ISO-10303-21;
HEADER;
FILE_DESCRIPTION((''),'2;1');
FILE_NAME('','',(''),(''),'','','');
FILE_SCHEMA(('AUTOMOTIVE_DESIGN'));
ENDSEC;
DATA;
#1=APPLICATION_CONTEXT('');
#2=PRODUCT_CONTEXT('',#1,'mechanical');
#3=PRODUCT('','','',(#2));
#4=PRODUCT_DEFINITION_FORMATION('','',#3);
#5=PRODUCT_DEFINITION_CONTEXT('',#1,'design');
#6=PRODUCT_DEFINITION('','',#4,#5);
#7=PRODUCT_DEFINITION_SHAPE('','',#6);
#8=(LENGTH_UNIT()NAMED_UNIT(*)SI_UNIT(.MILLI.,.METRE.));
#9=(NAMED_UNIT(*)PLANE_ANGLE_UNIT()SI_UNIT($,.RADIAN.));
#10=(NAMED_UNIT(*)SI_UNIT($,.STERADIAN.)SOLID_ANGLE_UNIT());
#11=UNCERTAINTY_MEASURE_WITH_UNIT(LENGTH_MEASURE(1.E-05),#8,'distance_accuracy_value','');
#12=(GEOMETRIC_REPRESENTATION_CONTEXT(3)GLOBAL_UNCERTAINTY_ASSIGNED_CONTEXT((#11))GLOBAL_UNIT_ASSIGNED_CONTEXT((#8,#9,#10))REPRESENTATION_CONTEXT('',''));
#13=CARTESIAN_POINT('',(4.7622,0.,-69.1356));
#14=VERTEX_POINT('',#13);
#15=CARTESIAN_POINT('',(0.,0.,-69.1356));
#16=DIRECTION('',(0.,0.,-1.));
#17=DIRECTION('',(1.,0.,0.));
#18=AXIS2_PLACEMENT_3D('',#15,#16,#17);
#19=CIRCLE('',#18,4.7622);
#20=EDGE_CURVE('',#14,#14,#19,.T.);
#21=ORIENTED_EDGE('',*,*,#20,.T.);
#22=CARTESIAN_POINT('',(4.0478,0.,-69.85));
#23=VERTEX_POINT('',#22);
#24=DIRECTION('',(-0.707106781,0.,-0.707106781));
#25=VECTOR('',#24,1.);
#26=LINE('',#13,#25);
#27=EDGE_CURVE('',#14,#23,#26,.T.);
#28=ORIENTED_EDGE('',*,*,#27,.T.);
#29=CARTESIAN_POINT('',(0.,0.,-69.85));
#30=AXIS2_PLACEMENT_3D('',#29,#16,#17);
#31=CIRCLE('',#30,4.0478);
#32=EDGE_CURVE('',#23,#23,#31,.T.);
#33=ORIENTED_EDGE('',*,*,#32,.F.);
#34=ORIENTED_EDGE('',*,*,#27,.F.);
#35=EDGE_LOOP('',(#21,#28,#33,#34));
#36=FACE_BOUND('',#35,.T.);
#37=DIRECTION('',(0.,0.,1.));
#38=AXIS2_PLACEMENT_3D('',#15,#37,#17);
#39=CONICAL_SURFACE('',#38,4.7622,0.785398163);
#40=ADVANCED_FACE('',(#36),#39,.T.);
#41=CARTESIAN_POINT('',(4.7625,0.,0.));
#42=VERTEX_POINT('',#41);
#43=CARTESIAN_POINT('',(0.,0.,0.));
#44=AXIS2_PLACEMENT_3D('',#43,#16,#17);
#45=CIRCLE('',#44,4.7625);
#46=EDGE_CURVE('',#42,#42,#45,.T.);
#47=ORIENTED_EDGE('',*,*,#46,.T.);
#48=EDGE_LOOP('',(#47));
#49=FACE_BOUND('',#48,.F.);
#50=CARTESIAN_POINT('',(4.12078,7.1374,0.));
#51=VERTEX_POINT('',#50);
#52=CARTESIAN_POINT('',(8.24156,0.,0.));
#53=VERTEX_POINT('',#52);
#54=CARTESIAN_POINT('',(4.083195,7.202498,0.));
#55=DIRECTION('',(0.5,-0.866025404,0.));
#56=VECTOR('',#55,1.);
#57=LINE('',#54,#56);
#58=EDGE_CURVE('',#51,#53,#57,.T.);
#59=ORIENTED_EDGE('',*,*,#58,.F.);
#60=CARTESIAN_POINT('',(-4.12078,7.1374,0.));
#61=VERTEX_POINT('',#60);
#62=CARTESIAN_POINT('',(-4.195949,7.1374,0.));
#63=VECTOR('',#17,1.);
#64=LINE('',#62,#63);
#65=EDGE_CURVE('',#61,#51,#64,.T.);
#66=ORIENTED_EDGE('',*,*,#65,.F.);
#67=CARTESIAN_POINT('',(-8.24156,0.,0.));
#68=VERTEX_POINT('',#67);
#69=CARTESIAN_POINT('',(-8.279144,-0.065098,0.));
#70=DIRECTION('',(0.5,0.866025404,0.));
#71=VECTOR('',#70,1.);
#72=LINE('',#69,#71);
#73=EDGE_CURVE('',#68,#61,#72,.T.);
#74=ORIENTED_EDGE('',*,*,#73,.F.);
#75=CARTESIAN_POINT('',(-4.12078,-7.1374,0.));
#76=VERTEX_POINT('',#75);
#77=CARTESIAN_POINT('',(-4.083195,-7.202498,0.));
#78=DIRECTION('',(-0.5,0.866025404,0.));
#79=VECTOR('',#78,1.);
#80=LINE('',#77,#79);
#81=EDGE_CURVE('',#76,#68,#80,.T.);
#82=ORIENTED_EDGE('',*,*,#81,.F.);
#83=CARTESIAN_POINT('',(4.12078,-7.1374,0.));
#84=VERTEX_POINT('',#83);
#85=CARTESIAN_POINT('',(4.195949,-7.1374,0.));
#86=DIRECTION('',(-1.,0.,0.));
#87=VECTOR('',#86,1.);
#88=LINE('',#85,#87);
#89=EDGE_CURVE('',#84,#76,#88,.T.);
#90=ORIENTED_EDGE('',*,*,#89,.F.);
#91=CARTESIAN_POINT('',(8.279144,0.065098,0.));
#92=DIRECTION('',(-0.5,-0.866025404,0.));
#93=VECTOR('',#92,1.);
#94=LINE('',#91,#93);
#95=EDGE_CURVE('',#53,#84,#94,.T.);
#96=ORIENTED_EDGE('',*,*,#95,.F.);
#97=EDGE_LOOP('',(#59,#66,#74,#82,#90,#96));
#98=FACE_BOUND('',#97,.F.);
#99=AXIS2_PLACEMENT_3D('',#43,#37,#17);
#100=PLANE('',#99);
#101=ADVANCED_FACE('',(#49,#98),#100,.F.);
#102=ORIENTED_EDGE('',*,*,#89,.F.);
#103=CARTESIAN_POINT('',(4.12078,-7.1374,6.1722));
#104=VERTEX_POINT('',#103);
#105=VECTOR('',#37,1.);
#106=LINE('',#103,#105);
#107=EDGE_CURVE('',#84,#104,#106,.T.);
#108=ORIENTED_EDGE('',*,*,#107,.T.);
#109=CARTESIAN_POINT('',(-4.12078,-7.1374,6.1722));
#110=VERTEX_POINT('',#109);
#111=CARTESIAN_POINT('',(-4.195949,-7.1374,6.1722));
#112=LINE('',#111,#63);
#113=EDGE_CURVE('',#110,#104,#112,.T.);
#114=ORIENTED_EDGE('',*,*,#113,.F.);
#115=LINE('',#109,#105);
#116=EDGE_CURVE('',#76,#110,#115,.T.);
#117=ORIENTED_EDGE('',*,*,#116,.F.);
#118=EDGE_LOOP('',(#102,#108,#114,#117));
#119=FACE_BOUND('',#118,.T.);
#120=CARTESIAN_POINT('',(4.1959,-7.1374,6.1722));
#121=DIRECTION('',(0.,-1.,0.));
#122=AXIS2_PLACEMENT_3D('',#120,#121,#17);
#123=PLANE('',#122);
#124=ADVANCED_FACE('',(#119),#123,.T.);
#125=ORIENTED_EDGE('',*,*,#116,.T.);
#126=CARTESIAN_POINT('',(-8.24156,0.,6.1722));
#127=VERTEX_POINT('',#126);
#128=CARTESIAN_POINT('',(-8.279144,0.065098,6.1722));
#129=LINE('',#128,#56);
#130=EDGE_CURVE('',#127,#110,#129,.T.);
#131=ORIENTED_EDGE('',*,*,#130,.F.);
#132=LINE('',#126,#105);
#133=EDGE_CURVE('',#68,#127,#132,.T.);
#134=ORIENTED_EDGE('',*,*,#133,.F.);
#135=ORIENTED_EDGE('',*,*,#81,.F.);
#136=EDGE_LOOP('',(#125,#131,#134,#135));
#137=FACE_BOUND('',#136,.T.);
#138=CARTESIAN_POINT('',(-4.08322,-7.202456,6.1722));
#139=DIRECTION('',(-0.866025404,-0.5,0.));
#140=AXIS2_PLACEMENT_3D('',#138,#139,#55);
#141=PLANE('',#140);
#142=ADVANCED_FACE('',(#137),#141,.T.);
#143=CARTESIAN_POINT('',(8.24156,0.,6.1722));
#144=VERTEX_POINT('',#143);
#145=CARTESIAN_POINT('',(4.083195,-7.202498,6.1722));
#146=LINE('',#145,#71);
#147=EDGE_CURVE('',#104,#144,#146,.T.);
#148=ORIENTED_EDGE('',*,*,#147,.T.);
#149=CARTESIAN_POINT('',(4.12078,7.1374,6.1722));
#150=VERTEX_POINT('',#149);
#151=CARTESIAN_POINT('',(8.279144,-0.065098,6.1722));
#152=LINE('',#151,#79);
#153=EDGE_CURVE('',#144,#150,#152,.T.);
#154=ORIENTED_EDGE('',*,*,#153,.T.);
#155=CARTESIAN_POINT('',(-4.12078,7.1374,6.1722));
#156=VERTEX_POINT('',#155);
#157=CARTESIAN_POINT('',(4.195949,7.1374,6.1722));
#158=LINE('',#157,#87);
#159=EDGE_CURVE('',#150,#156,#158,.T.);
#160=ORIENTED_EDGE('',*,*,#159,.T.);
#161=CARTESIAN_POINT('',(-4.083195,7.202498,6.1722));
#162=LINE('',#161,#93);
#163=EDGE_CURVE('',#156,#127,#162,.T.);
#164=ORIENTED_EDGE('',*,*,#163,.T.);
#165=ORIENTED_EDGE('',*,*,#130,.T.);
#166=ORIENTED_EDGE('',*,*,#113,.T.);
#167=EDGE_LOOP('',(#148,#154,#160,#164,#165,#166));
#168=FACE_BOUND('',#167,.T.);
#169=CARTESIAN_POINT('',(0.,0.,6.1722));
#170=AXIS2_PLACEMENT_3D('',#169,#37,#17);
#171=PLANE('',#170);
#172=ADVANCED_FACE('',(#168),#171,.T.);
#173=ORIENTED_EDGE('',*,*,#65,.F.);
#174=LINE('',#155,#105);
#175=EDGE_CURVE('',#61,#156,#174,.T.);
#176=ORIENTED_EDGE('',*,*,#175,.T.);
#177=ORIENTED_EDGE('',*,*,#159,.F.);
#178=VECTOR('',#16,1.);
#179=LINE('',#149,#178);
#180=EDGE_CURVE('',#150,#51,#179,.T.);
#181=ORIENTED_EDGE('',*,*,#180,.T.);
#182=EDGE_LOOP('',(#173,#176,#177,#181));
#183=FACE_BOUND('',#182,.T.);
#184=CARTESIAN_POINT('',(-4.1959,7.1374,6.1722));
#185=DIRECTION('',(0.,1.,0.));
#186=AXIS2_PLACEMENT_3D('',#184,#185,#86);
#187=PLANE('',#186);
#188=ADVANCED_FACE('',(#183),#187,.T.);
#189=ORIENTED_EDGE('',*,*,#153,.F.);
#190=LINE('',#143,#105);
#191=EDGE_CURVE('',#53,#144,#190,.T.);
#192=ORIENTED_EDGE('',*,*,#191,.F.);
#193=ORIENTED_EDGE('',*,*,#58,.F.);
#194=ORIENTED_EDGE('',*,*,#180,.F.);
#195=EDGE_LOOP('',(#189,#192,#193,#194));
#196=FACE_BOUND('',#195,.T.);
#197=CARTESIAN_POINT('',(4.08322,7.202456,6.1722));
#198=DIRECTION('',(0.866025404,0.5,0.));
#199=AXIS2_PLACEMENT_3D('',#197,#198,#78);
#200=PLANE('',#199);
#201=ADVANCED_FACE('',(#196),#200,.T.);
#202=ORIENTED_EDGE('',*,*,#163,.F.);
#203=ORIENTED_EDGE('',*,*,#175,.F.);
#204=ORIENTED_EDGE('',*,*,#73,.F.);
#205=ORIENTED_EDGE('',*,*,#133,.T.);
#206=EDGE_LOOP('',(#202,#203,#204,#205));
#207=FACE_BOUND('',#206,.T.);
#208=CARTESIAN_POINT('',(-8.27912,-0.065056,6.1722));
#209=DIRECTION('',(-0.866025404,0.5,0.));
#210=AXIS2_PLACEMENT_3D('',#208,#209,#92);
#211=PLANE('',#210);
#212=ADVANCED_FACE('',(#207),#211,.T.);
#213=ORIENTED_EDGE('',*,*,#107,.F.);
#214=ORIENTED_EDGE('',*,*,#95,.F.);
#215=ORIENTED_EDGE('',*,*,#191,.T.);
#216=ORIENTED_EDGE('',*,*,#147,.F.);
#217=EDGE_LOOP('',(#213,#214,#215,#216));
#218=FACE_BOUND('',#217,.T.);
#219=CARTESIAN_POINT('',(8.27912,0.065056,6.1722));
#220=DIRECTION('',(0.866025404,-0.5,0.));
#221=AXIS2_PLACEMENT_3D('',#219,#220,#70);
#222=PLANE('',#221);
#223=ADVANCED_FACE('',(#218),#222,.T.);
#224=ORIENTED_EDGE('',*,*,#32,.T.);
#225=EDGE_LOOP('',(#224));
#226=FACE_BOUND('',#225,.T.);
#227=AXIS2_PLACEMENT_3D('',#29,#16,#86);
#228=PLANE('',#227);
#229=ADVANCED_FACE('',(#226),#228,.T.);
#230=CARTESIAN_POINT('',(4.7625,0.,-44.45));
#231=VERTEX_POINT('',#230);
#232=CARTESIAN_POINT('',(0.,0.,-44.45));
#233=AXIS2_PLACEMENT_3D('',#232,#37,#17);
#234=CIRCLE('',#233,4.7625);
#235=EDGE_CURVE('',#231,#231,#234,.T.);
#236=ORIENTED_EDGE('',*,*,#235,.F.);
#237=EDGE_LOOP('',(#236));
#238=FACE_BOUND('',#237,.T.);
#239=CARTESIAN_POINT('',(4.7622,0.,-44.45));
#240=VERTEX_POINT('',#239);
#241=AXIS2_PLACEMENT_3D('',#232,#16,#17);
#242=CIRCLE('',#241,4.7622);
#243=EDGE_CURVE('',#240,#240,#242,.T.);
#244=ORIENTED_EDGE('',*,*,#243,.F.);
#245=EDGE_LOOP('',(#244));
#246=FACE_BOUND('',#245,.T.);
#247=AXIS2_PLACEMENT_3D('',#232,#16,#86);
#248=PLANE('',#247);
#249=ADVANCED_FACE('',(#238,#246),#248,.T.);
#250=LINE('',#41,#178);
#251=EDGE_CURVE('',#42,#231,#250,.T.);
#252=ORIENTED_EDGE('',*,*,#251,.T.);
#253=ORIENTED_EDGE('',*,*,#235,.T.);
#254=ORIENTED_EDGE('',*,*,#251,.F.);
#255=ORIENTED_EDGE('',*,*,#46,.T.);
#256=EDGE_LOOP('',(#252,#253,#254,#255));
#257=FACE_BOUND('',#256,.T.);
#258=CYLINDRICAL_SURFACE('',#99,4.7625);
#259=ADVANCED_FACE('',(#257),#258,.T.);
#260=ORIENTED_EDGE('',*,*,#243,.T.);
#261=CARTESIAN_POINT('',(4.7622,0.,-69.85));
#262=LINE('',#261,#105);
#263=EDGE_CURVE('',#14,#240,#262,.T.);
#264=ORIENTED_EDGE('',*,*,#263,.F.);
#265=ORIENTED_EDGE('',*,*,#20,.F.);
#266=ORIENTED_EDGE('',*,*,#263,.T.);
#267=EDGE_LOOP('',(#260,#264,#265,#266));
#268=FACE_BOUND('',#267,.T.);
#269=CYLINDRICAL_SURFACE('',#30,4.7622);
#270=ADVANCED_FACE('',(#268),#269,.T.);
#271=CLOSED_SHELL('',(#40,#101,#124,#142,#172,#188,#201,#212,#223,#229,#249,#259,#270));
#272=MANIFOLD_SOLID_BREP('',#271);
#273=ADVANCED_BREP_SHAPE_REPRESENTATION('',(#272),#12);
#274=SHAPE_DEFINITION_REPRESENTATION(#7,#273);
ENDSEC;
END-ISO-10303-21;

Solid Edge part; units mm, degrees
sketch "Sketch1" plane through (0, 0, 0) normal (0, 0, 1) x (1, 0, 0)
  circle A0 centre (0, 0) radius 8.2794
  dimension "D1" = 16.5588
extrude "Protrusion1" add sketch "Sketch1" along normal blind 6.1722
sketch "Sketch2" plane through (0, 0, 0) normal (0, 0, -1) x (1, 0, 0)
  circle A0 centre (0, 0) radius 4.7625
extrude "Protrusion2" add sketch "Sketch2" along normal blind 69.85
sketch "Sketch3" plane through (0, 0, -69.85) normal (0, 0, -1) x (1, 0, 0)
  circle A0 centre (0, 0) radius 4.7622
extrude "Cutout1" cut sketch "Sketch3" against normal blind 25.4 flip side to cut
chamfer "Chamfer_1" distance 0.7144 angle 45 1 edges at (-4.7622, 0, -69.85)
sketch "Sketch4" plane through (0, 0, 6.1722) normal (0, 0, 1) x (1, 0, 0)
  line L0 (-4.1959, 7.1374) -> (4.1959, 7.1374)
  dimension "D1" = 14.2748
extrude "Cutout2" cut sketch "Sketch4" against normal up to next material side at (0, 7.1874, 6.1722)
pattern_circular "Pattern1" count 6 over 360 about axis through (0, 0, 6.1722) along (0, 0, 1) of "Cutout2"
properties part number "117633"
